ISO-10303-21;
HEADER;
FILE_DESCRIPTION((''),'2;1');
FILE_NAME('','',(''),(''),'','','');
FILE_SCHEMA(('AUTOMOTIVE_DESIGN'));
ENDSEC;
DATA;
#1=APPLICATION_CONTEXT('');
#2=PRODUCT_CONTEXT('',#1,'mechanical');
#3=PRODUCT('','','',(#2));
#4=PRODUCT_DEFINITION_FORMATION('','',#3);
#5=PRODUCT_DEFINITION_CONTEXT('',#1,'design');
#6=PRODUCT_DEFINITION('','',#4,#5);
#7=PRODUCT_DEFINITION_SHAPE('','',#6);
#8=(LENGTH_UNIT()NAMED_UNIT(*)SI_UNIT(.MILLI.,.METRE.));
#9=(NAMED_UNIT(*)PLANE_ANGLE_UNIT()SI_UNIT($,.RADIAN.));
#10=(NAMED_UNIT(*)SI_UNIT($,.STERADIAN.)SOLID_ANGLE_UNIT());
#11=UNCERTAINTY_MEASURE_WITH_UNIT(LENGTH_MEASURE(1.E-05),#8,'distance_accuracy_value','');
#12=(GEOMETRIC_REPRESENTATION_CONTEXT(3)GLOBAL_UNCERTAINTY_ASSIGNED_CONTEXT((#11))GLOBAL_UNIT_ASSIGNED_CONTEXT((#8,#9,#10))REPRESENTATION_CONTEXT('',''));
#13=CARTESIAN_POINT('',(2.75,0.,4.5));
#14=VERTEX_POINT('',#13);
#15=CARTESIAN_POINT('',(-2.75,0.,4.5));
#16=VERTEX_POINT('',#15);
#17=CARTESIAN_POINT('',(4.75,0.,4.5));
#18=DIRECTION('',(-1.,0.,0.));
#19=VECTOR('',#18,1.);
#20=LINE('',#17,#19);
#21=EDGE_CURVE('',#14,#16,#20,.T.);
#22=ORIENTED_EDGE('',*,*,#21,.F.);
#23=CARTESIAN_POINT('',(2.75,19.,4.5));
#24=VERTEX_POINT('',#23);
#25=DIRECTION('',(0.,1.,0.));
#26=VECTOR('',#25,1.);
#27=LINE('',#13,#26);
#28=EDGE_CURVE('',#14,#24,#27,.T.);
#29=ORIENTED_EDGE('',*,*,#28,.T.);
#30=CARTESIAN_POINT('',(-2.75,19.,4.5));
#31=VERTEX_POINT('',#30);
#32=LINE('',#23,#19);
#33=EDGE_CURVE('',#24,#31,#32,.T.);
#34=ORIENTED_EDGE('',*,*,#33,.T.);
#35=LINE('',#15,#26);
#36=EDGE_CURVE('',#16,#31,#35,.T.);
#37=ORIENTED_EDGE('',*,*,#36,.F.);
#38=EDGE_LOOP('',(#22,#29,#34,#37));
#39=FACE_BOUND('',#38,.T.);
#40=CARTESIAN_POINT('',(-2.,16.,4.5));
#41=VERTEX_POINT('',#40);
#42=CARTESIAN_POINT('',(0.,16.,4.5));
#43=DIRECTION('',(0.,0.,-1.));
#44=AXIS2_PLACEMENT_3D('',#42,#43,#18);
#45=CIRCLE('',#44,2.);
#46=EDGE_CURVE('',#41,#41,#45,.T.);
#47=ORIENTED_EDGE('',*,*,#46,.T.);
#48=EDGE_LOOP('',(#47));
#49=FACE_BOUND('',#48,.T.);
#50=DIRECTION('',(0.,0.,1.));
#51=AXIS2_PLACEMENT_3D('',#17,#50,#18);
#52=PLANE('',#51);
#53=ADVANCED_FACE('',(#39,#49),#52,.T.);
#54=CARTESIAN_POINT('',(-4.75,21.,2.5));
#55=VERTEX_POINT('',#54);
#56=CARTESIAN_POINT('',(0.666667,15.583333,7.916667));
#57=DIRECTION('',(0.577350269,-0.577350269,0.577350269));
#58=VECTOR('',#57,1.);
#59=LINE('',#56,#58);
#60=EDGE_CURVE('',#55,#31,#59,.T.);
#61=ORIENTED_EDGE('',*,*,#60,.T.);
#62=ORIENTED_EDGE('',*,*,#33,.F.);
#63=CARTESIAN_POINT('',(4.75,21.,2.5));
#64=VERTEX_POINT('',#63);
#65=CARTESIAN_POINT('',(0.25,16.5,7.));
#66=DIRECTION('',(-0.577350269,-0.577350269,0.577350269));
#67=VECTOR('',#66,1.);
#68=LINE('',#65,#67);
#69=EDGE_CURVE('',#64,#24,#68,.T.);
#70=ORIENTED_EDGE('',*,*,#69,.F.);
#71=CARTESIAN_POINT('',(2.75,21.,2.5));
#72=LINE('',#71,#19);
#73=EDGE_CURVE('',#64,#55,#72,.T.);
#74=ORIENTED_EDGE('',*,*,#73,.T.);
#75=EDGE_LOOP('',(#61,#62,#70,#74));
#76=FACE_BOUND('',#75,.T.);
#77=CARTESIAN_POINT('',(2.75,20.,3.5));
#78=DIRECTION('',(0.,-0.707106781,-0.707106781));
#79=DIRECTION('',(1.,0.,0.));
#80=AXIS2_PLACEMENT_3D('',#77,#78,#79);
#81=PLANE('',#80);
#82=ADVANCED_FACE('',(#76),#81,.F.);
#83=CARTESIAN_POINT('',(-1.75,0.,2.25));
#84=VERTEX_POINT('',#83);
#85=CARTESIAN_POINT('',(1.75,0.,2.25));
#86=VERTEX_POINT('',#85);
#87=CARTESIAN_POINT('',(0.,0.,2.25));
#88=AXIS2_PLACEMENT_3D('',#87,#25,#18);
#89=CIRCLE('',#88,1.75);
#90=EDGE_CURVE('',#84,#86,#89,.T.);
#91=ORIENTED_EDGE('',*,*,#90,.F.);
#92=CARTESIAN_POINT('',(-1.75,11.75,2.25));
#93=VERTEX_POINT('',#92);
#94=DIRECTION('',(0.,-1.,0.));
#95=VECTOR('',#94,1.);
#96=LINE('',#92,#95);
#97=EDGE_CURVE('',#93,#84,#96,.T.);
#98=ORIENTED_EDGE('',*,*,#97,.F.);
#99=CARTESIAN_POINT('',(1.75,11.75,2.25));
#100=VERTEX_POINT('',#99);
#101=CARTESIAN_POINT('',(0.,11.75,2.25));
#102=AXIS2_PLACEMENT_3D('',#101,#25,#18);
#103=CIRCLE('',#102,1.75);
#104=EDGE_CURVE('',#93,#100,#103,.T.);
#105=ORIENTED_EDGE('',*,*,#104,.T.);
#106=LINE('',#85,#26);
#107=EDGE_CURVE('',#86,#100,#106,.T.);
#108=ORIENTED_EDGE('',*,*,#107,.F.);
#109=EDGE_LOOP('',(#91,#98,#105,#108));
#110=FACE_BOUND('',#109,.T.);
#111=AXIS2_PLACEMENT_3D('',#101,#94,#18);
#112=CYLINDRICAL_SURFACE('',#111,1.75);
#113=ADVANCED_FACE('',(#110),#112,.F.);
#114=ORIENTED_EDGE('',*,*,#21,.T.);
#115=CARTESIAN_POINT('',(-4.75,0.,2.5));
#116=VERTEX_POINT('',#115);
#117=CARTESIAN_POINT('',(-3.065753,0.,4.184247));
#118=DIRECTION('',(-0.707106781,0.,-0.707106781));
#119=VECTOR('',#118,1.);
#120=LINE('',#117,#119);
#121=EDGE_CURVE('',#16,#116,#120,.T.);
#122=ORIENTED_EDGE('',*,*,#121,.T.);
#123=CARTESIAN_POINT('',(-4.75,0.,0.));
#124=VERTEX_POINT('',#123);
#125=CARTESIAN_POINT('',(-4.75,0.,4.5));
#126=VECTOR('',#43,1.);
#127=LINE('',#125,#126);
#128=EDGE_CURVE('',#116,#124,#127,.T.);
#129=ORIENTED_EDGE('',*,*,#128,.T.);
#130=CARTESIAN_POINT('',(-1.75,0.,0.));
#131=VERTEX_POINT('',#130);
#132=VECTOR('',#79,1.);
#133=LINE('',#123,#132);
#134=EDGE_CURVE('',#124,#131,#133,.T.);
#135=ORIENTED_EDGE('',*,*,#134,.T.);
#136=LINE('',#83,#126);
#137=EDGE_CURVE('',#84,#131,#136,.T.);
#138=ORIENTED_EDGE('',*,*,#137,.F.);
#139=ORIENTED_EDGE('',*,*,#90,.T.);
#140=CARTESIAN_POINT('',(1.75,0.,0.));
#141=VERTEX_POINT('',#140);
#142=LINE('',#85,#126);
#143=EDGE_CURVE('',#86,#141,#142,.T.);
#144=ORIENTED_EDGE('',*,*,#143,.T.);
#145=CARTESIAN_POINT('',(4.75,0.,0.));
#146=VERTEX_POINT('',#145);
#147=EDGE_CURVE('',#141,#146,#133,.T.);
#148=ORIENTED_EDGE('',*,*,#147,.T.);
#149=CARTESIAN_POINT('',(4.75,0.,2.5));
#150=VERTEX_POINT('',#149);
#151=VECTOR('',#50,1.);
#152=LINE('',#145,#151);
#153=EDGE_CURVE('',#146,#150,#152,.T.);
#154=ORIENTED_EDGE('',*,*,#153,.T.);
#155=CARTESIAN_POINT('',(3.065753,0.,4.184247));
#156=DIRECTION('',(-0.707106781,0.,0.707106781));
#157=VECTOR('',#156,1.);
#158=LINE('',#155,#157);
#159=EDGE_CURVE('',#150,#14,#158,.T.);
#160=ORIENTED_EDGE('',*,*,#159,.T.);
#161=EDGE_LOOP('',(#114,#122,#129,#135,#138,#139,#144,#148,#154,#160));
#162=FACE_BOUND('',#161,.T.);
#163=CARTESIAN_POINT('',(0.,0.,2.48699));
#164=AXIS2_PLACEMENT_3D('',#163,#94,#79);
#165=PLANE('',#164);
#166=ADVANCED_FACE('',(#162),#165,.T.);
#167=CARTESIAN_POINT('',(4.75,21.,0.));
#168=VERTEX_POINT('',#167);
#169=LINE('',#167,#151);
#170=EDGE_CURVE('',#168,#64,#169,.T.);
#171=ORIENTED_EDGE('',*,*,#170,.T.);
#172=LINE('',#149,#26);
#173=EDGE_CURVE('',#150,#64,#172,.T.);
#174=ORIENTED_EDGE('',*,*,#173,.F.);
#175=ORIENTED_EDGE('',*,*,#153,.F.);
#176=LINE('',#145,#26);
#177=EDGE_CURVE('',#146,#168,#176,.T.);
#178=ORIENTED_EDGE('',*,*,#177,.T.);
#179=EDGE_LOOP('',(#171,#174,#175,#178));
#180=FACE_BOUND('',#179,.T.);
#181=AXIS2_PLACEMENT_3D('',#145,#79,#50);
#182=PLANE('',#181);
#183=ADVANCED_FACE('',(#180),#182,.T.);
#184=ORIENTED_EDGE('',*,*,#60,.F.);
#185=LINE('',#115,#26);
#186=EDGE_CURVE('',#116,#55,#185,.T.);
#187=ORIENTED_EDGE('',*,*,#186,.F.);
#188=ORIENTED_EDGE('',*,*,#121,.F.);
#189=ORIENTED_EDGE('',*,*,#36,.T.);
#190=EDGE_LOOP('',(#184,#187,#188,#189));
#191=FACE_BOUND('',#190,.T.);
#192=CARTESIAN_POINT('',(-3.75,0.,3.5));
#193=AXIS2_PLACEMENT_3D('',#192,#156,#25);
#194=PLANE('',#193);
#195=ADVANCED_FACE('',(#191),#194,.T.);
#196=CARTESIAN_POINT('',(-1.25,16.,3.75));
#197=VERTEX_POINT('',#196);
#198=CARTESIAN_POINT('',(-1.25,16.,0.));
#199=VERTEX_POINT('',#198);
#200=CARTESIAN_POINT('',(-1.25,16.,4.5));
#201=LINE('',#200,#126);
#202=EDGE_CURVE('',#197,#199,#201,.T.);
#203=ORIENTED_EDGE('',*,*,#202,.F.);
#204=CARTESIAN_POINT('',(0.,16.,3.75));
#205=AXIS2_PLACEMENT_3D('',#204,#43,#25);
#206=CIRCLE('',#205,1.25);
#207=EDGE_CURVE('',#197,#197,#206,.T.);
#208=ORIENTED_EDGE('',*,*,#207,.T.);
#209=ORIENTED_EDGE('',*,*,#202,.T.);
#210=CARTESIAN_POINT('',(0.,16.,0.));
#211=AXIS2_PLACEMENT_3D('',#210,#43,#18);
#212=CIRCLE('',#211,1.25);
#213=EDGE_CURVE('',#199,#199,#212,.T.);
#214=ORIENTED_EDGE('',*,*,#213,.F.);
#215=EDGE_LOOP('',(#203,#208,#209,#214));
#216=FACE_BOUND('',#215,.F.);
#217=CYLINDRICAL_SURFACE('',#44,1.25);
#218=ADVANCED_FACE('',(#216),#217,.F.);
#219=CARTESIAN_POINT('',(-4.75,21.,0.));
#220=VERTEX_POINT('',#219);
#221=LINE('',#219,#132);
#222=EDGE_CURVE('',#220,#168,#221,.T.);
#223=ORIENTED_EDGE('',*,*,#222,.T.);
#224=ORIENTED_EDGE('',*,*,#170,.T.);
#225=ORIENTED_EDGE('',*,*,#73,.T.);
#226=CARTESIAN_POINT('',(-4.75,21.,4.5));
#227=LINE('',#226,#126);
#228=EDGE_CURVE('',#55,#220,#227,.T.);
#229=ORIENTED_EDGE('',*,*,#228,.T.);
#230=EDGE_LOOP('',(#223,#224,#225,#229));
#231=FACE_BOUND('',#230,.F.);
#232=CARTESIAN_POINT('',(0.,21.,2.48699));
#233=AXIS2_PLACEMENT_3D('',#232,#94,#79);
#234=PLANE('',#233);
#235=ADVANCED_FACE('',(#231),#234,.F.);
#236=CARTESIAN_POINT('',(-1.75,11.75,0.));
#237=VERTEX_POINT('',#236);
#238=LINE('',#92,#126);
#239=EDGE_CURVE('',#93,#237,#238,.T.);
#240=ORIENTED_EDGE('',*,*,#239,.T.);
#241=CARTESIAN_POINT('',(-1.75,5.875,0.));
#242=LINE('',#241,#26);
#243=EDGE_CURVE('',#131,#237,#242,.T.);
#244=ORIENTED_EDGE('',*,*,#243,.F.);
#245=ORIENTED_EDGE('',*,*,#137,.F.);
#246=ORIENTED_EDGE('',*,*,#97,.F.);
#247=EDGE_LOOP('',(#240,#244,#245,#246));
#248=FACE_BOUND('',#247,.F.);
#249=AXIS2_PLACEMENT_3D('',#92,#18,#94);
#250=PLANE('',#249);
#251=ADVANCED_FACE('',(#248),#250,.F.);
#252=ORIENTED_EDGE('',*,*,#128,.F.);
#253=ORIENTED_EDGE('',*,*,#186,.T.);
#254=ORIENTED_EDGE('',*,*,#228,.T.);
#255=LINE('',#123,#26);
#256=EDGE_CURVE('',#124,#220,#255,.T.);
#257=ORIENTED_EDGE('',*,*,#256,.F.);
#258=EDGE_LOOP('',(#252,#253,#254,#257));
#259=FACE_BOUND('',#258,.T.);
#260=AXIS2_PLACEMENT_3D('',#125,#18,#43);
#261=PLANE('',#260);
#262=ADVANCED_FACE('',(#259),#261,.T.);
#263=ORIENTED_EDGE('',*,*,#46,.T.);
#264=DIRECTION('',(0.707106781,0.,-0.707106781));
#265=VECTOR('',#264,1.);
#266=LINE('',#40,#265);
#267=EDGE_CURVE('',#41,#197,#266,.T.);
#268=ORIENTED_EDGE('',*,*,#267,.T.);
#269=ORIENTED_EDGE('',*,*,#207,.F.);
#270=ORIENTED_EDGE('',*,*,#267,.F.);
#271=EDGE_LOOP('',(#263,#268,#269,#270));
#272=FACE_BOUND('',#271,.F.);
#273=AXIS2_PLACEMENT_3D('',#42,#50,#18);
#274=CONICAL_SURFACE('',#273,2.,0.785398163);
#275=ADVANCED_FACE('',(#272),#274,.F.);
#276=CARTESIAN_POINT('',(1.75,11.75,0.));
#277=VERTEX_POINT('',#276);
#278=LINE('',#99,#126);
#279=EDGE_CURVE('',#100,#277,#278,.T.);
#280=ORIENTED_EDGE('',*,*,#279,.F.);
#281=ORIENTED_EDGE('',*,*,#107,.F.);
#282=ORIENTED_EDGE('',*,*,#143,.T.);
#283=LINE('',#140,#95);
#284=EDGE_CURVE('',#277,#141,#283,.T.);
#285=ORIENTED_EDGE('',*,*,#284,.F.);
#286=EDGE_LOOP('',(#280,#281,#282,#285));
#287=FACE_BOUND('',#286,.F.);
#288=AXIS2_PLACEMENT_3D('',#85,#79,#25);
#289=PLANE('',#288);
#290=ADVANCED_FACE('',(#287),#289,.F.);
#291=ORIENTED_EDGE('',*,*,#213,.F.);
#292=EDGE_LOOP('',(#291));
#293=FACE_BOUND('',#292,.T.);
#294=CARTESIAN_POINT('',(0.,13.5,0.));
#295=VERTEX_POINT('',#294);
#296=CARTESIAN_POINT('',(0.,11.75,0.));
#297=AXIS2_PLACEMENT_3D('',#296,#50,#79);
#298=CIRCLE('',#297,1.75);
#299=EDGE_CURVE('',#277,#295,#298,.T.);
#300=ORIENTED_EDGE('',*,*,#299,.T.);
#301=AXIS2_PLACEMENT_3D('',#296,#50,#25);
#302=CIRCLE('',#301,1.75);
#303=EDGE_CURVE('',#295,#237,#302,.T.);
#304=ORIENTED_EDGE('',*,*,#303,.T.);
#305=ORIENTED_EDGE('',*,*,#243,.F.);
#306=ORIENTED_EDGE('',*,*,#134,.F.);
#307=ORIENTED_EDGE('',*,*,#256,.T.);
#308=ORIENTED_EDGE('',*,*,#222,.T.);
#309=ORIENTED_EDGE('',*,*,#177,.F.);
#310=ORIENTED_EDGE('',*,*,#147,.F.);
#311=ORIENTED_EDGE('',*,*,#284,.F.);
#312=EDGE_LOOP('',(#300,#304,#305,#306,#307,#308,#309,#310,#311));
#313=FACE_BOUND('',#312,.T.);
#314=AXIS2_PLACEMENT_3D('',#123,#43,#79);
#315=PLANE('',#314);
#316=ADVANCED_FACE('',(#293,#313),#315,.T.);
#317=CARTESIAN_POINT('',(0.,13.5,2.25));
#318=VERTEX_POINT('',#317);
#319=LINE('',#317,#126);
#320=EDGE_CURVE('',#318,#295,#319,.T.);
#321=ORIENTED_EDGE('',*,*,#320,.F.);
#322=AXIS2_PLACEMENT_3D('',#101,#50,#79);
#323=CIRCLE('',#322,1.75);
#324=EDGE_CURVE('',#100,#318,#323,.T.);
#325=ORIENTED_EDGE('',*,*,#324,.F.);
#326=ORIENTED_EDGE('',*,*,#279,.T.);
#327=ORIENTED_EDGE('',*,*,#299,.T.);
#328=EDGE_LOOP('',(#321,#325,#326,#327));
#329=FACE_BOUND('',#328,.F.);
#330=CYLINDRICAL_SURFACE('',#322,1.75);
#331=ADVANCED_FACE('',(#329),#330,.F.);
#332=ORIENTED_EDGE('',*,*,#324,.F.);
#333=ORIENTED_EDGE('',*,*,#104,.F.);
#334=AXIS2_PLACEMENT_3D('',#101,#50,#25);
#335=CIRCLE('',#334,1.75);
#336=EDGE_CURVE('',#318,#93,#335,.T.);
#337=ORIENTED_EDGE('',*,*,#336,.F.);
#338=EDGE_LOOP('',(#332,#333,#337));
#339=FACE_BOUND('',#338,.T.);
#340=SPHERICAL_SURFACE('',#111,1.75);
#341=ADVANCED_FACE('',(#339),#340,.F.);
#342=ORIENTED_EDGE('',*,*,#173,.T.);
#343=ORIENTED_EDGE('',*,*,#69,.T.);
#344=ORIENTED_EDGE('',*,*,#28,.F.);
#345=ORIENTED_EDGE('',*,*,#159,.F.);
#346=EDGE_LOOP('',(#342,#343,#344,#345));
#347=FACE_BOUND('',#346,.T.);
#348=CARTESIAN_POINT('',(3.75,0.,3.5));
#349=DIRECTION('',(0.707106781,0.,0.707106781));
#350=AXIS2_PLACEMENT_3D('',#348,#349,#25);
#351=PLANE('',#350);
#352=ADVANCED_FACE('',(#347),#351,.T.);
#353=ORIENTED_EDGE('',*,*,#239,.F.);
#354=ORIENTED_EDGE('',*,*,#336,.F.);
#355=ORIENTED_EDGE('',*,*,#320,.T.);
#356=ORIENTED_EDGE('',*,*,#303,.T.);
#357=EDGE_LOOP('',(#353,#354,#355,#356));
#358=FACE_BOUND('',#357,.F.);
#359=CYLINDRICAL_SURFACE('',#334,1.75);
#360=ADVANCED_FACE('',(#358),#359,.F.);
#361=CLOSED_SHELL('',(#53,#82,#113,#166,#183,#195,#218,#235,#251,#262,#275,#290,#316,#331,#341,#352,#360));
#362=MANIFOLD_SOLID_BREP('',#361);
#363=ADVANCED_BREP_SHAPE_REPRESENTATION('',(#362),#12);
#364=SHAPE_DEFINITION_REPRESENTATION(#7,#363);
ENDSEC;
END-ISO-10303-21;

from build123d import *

# Parameters (mm, degrees)
F6_DEPTH        = 21
F7_SIZE         = 2
F8_SIZE         = 2
F12_DEPTH       = 2.251
F14_D           = 2.5
F14_CSINK_D     = 4
F14_CSINK_ANGLE = 90


# Not quite as in the source:
# - a feature names something its author has since deleted; it is built from what else it names


with BuildPart() as f6:
    # F5 (on Front) → F6 (new body)
    with BuildSketch(Plane.XZ):
        with BuildLine():
            Line((4.75, 0), (4.75, 4.5))
            Line((4.75, 4.5), (-4.75, 4.5))
            Line((-4.75, 4.5), (-4.75, 0))
            Line((-4.75, 0), (-1.75, 0))
            Line((-1.75, 0), (-1.75, 2.25))
            ThreePointArc((-1.75, 2.25), (0, 4), (1.75, 2.25))
            Line((1.75, 2.25), (1.75, 0))
            Line((1.75, 0), (4.75, 0))
        make_face()
        with BuildLine():
            Line((-1.75, 0), (1.75, 0))
            Line((1.75, 0), (1.75, 2.25))
            ThreePointArc((1.75, 2.25), (0, 4), (-1.75, 2.25))
            Line((-1.75, 2.25), (-1.75, 0))
        make_face()
    extrude(amount=-F6_DEPTH)

    # F7
    f7_edges = [f6.edges().sort_by_distance(p)[0] for p in [
        (-4.75, 10.5, 4.5),
        (4.75, 10.5, 4.5),
    ]]
    chamfer(f7_edges, length=F7_SIZE)

    # F8
    f8_edges = [f6.edges().sort_by_distance(p)[0] for p in [
        (0, 21, 4.5),
    ]]
    chamfer(f8_edges, length=F8_SIZE)

    # F10 (on offset) → F11 (revolve, cut)
    with BuildSketch(Plane.XY.offset(2.25)):
        with BuildLine():
            Line((-1.75, 11.75), (-1.75, 0))
            Line((-1.75, 0), (0, 0))
            Line((0, 0), (0, 13.5))
            ThreePointArc((0, 13.5), (-1.2374368671, 12.9874368671), (-1.75, 11.75))
        make_face()
    revolve(axis=Axis((0, 6.75, 2.25), (0, 1, 0)), mode=Mode.SUBTRACT)

    # F10 (on offset) → F12 (cut, through all)
    with BuildSketch(Plane.XY.offset(2.25)):
        with BuildLine():
            Line((-1.75, 11.75), (-1.75, 0))
            Line((-1.75, 0), (0, 0))
            Line((0, 0), (0, 13.5))
            ThreePointArc((0, 13.5), (-1.2374368671, 12.9874368671), (-1.75, 11.75))
        make_face()
        with BuildLine():
            Line((0, 13.5), (0, 0))
            Line((0, 0), (1.75, 0))
            Line((1.75, 0), (1.75, 11.75))
            ThreePointArc((1.75, 11.75), (1.2374368671, 12.9874368671), (0, 13.5))
        make_face()
    extrude(amount=-F12_DEPTH, mode=Mode.SUBTRACT)

    # F14 (through all)
    with Locations(Plane.XY.offset(4.5)):
        with Locations((0, 16)):
            CounterSinkHole(F14_D / 2, F14_CSINK_D / 2, counter_sink_angle=F14_CSINK_ANGLE)


solid = f6.part
